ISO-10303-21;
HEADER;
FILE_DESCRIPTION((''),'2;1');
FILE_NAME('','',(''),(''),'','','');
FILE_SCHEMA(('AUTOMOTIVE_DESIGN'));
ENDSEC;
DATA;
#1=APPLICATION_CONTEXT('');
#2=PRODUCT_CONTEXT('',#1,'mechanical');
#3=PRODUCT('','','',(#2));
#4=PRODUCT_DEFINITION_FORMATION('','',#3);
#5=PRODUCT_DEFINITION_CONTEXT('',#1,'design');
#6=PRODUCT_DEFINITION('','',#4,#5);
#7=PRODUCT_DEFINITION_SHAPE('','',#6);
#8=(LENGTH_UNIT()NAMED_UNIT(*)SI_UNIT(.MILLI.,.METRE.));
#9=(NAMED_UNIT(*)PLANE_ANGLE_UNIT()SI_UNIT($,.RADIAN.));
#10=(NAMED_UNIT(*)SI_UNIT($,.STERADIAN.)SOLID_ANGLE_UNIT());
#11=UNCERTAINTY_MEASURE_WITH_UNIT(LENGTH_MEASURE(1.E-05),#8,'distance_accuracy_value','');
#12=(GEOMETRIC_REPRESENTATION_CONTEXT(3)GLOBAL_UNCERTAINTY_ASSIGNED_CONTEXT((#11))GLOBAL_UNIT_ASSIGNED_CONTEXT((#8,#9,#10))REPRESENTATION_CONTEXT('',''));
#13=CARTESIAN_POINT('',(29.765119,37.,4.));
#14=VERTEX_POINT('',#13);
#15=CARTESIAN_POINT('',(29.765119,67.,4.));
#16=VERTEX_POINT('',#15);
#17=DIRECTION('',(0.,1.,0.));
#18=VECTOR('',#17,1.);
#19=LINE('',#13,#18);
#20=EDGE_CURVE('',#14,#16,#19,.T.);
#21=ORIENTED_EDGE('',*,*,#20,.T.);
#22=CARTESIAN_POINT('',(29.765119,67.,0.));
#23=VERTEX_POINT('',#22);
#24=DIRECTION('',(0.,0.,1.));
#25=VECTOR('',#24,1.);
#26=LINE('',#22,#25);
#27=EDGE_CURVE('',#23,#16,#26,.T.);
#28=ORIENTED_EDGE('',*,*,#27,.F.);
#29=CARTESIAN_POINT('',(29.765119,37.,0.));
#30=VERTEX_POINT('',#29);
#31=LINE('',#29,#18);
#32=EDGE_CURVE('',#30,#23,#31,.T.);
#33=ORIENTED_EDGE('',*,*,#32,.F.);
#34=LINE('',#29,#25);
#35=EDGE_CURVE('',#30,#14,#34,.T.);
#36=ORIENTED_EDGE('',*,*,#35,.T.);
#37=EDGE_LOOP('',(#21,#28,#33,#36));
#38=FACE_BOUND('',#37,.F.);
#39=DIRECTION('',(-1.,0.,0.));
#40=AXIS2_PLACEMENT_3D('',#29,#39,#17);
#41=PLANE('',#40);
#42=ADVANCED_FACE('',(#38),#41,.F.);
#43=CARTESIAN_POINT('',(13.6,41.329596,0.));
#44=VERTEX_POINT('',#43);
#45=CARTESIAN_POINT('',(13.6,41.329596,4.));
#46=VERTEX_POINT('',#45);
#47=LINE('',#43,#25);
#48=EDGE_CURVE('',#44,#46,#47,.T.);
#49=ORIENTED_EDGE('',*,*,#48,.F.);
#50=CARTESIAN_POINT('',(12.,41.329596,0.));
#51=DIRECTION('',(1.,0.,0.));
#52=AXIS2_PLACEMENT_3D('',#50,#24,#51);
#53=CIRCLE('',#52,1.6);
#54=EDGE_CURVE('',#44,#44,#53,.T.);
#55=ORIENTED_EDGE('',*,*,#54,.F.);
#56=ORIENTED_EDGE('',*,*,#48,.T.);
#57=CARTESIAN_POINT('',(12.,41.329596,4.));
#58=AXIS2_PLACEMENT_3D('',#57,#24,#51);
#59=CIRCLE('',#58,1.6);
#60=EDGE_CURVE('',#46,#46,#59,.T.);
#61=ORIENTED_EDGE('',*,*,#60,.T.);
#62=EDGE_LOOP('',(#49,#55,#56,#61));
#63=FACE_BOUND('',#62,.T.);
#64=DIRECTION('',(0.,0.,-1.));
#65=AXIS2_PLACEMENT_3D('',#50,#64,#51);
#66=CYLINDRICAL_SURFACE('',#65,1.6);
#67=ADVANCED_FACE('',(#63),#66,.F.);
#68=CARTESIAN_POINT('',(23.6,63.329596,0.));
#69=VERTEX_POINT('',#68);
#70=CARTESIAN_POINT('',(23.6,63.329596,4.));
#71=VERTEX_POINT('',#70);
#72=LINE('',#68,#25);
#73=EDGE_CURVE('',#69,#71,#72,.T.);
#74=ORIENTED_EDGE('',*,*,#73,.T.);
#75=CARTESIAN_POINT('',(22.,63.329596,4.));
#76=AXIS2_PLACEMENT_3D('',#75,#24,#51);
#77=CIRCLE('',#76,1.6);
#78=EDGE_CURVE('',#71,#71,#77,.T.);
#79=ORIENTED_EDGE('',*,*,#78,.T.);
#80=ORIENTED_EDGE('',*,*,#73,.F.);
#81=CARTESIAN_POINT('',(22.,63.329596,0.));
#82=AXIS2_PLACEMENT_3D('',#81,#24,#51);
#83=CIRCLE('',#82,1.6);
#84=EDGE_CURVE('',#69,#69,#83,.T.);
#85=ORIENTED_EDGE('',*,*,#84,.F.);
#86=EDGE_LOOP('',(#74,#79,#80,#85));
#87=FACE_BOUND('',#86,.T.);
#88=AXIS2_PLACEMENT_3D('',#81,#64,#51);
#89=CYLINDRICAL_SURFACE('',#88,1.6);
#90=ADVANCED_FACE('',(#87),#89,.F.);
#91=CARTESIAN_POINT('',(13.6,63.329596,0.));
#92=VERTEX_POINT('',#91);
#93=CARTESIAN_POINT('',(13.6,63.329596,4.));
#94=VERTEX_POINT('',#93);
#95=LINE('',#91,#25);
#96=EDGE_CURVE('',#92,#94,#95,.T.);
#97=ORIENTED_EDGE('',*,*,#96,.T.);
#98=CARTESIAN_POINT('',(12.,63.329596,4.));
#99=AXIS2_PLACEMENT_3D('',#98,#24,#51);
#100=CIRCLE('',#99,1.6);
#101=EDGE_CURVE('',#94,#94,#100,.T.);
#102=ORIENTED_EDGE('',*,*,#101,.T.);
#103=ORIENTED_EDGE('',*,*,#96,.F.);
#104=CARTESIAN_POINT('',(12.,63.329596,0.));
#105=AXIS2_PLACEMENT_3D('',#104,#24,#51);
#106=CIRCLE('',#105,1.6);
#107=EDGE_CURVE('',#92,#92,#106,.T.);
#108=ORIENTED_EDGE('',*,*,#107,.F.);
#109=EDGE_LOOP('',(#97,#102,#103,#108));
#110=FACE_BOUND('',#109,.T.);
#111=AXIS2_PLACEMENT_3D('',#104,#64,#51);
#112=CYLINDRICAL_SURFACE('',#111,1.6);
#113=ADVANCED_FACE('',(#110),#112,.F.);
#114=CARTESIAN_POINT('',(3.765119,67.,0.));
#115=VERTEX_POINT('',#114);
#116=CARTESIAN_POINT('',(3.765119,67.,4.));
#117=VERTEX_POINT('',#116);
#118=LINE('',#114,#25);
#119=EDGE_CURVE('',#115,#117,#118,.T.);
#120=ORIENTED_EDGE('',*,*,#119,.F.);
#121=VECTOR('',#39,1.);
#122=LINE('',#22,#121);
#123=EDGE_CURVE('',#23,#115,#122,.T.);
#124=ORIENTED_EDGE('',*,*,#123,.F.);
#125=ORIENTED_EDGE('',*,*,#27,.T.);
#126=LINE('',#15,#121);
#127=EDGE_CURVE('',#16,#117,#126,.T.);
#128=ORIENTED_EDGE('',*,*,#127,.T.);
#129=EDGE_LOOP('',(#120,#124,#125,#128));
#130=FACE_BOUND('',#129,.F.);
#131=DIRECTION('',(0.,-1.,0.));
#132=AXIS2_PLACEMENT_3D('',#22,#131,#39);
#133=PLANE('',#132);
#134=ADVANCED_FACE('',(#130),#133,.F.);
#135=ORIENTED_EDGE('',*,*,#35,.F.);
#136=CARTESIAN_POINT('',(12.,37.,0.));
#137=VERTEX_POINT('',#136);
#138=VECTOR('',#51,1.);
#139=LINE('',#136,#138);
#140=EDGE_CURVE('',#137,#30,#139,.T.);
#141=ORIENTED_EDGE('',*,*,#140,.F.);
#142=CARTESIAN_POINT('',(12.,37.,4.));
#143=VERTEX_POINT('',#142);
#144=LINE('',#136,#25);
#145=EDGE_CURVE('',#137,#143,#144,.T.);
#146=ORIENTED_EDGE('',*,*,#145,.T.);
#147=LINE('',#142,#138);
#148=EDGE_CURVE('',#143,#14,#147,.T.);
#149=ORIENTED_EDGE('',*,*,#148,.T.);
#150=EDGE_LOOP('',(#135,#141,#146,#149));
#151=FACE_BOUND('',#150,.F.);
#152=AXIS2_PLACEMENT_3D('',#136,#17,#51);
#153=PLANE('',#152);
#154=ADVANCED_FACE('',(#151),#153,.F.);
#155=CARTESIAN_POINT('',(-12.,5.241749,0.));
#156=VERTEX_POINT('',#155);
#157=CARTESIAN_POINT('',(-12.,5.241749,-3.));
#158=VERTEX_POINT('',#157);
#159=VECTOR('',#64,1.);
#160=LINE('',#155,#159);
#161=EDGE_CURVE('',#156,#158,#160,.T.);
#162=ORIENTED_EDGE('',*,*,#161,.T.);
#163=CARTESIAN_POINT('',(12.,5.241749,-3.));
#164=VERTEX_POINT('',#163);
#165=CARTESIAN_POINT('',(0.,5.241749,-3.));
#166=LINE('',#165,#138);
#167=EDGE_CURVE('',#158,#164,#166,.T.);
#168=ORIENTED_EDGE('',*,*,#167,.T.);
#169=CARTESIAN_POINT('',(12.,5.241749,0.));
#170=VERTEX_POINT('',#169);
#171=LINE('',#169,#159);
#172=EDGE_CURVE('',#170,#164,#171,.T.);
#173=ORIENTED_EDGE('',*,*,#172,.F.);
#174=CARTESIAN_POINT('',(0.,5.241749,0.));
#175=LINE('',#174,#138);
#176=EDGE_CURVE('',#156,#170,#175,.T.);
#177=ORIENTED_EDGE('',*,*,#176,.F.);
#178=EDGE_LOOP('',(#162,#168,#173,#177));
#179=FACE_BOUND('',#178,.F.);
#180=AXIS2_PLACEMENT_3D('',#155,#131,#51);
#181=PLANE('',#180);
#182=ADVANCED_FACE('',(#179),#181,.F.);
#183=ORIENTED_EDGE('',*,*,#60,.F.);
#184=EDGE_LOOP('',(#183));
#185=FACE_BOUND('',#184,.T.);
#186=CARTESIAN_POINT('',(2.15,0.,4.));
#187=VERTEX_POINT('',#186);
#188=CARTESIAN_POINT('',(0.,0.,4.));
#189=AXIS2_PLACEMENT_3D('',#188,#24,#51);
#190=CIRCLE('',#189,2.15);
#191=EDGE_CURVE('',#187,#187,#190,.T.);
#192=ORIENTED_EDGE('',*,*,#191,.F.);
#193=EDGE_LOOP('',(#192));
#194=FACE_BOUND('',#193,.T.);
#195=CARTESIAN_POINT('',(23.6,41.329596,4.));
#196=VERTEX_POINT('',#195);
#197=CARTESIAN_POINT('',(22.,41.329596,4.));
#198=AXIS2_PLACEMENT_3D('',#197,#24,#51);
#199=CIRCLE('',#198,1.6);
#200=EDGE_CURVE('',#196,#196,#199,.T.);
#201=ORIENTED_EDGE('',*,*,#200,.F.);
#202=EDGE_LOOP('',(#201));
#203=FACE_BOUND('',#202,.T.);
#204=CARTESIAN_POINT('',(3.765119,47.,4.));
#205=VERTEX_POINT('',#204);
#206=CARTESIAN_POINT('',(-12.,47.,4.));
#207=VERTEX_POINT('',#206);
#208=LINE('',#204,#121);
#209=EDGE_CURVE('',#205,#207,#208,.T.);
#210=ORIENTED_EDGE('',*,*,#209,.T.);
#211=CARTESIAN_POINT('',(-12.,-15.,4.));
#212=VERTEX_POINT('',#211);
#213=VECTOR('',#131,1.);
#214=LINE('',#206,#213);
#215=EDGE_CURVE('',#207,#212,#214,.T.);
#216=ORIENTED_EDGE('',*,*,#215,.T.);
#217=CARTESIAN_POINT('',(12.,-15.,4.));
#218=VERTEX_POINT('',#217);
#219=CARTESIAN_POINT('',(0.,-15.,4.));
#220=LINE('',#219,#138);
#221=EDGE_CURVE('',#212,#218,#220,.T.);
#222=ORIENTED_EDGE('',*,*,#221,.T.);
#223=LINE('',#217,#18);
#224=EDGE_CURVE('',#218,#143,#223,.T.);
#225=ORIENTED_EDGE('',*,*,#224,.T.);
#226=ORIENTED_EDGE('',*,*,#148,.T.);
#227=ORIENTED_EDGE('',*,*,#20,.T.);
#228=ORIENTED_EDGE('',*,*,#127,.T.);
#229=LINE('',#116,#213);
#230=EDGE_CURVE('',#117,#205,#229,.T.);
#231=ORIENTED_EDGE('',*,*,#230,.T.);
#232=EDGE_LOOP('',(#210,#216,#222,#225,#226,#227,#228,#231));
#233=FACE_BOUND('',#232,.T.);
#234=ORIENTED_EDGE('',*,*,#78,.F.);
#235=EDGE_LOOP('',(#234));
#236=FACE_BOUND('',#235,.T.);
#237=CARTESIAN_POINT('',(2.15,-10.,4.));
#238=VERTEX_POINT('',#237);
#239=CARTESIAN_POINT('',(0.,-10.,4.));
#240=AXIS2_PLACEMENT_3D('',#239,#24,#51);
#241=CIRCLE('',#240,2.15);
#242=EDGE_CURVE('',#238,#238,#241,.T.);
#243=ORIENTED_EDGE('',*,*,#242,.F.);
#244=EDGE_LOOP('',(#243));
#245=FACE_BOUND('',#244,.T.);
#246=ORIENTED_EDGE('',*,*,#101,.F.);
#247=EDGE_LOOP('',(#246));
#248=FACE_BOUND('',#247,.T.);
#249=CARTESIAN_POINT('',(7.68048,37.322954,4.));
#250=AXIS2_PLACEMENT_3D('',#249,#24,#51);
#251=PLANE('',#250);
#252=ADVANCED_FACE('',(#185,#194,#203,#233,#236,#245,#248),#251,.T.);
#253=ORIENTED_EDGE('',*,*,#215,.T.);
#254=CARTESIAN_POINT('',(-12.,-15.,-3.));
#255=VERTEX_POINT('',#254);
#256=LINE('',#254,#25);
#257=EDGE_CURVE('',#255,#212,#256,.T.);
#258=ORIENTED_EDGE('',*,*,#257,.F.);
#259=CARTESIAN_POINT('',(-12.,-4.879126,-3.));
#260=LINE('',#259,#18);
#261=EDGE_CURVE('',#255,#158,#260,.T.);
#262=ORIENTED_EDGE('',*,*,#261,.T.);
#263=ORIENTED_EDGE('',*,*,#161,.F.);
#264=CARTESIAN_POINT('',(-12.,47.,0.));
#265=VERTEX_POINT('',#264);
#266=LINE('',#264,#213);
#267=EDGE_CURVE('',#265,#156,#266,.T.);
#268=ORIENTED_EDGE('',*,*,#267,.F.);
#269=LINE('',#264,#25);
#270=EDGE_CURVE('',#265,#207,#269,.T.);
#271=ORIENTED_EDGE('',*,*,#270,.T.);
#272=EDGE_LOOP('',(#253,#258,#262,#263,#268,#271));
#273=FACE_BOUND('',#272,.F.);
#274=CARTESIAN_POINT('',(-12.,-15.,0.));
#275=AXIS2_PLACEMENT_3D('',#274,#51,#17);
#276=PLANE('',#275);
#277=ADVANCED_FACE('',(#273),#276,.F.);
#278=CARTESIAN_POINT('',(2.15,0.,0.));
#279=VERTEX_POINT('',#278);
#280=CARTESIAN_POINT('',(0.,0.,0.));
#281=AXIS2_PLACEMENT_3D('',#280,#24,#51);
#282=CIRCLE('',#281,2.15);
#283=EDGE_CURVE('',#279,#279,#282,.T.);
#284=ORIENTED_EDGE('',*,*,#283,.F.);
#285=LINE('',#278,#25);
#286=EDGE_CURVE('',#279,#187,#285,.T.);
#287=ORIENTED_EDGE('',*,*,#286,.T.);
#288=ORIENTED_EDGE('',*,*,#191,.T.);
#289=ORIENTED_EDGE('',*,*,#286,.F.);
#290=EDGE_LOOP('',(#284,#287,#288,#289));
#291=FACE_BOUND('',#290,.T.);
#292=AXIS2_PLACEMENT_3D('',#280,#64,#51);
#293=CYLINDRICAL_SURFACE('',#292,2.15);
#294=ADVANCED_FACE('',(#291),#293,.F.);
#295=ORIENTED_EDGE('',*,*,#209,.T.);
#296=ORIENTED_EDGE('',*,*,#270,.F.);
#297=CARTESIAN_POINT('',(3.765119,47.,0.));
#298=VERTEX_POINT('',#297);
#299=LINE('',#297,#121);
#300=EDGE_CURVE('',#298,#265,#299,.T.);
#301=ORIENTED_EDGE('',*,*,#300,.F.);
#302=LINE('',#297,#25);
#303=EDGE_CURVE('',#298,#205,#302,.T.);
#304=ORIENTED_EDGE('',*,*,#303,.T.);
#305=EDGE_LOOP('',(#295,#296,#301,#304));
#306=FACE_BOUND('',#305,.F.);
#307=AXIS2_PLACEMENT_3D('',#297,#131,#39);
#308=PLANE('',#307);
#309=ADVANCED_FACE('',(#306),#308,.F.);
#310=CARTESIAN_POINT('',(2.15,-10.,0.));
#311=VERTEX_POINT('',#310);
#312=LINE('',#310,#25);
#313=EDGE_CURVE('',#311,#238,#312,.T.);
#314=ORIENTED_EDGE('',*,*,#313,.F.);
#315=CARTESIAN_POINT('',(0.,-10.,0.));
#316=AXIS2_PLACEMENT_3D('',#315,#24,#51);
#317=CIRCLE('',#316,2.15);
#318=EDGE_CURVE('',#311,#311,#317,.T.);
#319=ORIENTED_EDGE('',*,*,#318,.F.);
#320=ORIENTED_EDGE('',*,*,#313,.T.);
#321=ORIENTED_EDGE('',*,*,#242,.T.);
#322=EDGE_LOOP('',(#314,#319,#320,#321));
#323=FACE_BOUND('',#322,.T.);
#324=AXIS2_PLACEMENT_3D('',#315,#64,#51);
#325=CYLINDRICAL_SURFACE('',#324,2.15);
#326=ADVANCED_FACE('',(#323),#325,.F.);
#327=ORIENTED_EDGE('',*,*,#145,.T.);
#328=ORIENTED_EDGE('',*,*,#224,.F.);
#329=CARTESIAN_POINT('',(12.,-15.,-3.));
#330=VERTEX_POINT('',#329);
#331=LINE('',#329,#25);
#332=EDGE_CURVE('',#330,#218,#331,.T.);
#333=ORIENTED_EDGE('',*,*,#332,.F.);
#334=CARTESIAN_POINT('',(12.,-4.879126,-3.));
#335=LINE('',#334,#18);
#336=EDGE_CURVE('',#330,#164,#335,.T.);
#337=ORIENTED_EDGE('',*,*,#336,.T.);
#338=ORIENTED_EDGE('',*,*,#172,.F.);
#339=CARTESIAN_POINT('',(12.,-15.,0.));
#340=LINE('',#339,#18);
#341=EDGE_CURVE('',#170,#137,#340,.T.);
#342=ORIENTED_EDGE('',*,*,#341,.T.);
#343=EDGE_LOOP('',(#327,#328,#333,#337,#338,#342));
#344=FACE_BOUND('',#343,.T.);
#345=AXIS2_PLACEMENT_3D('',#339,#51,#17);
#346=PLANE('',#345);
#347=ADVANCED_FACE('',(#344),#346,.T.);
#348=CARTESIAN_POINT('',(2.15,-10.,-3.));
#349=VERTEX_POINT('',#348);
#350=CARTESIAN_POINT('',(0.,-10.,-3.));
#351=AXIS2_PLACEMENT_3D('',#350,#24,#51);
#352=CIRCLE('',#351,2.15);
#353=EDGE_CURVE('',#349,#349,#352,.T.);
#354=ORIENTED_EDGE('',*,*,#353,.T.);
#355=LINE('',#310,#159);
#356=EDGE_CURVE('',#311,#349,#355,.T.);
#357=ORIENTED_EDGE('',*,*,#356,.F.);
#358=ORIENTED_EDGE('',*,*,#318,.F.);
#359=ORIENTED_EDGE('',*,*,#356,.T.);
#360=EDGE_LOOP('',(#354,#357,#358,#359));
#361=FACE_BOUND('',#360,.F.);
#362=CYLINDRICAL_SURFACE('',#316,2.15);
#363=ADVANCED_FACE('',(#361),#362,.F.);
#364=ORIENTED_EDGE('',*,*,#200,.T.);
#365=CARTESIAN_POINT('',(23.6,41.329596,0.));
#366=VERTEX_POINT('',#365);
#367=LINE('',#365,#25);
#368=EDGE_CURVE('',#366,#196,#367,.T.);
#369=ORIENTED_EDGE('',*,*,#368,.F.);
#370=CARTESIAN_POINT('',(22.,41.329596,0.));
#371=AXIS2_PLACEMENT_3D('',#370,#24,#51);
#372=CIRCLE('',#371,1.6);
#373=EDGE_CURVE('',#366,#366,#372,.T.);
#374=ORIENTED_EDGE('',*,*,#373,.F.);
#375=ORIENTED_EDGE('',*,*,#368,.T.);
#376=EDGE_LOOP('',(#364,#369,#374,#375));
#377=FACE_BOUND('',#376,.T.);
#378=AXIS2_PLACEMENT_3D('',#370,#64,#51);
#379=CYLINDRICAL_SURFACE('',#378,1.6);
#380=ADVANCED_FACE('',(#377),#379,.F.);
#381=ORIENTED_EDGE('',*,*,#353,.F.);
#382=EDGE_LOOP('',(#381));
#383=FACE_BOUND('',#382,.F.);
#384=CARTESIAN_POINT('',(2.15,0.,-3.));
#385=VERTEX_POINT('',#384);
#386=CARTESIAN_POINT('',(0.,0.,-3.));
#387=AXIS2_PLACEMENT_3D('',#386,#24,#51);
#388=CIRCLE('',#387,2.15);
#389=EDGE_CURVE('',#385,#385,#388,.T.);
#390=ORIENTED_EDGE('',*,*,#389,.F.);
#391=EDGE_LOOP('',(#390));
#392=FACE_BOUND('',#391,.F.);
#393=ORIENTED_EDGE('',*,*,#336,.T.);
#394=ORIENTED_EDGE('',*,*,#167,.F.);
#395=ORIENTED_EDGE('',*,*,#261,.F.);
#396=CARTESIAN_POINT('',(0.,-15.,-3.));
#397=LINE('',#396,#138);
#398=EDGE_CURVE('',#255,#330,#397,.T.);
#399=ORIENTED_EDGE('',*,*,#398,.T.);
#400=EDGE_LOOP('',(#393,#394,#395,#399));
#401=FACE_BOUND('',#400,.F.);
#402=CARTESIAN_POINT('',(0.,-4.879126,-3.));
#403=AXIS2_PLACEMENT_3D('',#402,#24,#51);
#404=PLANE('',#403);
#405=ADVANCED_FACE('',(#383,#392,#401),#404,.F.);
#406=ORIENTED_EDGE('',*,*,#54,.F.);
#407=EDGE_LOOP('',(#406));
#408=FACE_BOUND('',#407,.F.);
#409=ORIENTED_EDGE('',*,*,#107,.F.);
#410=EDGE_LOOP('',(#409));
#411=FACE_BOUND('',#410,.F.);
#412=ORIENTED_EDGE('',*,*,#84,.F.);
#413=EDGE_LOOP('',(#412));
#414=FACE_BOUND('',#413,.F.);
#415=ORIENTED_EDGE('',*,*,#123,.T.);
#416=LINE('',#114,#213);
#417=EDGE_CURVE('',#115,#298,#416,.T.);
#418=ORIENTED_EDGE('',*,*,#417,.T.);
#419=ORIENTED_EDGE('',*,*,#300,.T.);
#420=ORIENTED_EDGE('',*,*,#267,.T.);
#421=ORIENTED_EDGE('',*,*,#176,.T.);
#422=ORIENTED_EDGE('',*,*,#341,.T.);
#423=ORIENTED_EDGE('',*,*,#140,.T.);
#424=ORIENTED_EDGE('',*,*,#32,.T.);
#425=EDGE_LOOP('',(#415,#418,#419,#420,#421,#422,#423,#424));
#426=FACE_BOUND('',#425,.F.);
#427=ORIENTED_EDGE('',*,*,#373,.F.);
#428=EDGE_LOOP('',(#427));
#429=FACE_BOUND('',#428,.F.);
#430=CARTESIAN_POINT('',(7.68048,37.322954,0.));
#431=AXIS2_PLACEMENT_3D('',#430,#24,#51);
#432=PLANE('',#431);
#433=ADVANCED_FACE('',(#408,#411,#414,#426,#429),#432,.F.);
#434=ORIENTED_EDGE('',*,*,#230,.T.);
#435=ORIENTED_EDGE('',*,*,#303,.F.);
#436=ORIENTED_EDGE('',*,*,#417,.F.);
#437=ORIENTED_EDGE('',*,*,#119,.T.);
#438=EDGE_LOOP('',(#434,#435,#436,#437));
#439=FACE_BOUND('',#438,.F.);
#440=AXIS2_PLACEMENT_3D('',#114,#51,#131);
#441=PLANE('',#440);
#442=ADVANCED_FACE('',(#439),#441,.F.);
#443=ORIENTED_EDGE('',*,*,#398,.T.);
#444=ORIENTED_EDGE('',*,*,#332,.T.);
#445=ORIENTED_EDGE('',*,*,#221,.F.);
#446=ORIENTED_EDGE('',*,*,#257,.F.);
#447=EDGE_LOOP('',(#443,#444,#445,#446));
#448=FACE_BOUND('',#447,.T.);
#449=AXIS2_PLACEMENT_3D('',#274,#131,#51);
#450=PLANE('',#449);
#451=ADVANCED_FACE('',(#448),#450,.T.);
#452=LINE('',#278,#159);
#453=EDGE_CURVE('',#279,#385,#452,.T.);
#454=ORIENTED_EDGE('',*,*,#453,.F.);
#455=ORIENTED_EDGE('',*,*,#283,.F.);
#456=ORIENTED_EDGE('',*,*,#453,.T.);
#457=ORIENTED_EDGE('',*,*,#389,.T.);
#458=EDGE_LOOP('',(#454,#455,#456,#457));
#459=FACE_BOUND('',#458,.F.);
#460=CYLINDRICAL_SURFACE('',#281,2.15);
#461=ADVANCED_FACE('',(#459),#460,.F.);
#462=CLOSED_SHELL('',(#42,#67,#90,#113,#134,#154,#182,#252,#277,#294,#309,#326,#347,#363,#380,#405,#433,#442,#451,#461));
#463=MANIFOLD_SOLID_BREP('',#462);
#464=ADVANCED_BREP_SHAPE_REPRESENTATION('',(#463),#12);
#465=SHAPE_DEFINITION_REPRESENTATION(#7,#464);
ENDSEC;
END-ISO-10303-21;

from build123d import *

# Parameters (mm, degrees)
F0_R     = 1.6
F0_W     = 24
F0_H     = 20.2417488769
F0_R_2   = 2.15
F1_DEPTH = 4
F2_DEPTH = 3


# Not quite as in the source:
# - a feature names something its author has since deleted; it is built from what else it names


with BuildPart() as f1:
    # F0 (on Top) → F1 (new body)
    with BuildSketch(Plane.XY):
        Polygon((-12, 47), (-12, 5.2417488769), (12, 5.2417488769), (12, 37), (29.7651190069, 37), (29.7651190069, 67), (3.7651190069, 67), (3.7651190069, 47), align=None)
        with Locations((12, 41.3295961916)):
            Circle(F0_R, mode=Mode.SUBTRACT)
        with Locations((22, 41.3295961916)):
            Circle(F0_R, mode=Mode.SUBTRACT)
        with Locations((12, 63.3295961916)):
            Circle(F0_R, mode=Mode.SUBTRACT)
        with Locations((22, 63.3295961916)):
            Circle(F0_R, mode=Mode.SUBTRACT)
        with Locations((0, -4.8791255616)):
            Rectangle(F0_W, F0_H)
        with Locations((0, -10)):
            Circle(F0_R_2, mode=Mode.SUBTRACT)
        Circle(F0_R_2, mode=Mode.SUBTRACT)
    extrude(amount=F1_DEPTH)

    # F0 (on Top) → F2 (join)
    with BuildSketch(Plane.XY):
        with Locations((0, -4.8791255616)):
            Rectangle(F0_W, F0_H)
        with Locations((0, -10)):
            Circle(F0_R_2, mode=Mode.SUBTRACT)
        Circle(F0_R_2, mode=Mode.SUBTRACT)
    extrude(amount=-F2_DEPTH)


solid = f1.part
